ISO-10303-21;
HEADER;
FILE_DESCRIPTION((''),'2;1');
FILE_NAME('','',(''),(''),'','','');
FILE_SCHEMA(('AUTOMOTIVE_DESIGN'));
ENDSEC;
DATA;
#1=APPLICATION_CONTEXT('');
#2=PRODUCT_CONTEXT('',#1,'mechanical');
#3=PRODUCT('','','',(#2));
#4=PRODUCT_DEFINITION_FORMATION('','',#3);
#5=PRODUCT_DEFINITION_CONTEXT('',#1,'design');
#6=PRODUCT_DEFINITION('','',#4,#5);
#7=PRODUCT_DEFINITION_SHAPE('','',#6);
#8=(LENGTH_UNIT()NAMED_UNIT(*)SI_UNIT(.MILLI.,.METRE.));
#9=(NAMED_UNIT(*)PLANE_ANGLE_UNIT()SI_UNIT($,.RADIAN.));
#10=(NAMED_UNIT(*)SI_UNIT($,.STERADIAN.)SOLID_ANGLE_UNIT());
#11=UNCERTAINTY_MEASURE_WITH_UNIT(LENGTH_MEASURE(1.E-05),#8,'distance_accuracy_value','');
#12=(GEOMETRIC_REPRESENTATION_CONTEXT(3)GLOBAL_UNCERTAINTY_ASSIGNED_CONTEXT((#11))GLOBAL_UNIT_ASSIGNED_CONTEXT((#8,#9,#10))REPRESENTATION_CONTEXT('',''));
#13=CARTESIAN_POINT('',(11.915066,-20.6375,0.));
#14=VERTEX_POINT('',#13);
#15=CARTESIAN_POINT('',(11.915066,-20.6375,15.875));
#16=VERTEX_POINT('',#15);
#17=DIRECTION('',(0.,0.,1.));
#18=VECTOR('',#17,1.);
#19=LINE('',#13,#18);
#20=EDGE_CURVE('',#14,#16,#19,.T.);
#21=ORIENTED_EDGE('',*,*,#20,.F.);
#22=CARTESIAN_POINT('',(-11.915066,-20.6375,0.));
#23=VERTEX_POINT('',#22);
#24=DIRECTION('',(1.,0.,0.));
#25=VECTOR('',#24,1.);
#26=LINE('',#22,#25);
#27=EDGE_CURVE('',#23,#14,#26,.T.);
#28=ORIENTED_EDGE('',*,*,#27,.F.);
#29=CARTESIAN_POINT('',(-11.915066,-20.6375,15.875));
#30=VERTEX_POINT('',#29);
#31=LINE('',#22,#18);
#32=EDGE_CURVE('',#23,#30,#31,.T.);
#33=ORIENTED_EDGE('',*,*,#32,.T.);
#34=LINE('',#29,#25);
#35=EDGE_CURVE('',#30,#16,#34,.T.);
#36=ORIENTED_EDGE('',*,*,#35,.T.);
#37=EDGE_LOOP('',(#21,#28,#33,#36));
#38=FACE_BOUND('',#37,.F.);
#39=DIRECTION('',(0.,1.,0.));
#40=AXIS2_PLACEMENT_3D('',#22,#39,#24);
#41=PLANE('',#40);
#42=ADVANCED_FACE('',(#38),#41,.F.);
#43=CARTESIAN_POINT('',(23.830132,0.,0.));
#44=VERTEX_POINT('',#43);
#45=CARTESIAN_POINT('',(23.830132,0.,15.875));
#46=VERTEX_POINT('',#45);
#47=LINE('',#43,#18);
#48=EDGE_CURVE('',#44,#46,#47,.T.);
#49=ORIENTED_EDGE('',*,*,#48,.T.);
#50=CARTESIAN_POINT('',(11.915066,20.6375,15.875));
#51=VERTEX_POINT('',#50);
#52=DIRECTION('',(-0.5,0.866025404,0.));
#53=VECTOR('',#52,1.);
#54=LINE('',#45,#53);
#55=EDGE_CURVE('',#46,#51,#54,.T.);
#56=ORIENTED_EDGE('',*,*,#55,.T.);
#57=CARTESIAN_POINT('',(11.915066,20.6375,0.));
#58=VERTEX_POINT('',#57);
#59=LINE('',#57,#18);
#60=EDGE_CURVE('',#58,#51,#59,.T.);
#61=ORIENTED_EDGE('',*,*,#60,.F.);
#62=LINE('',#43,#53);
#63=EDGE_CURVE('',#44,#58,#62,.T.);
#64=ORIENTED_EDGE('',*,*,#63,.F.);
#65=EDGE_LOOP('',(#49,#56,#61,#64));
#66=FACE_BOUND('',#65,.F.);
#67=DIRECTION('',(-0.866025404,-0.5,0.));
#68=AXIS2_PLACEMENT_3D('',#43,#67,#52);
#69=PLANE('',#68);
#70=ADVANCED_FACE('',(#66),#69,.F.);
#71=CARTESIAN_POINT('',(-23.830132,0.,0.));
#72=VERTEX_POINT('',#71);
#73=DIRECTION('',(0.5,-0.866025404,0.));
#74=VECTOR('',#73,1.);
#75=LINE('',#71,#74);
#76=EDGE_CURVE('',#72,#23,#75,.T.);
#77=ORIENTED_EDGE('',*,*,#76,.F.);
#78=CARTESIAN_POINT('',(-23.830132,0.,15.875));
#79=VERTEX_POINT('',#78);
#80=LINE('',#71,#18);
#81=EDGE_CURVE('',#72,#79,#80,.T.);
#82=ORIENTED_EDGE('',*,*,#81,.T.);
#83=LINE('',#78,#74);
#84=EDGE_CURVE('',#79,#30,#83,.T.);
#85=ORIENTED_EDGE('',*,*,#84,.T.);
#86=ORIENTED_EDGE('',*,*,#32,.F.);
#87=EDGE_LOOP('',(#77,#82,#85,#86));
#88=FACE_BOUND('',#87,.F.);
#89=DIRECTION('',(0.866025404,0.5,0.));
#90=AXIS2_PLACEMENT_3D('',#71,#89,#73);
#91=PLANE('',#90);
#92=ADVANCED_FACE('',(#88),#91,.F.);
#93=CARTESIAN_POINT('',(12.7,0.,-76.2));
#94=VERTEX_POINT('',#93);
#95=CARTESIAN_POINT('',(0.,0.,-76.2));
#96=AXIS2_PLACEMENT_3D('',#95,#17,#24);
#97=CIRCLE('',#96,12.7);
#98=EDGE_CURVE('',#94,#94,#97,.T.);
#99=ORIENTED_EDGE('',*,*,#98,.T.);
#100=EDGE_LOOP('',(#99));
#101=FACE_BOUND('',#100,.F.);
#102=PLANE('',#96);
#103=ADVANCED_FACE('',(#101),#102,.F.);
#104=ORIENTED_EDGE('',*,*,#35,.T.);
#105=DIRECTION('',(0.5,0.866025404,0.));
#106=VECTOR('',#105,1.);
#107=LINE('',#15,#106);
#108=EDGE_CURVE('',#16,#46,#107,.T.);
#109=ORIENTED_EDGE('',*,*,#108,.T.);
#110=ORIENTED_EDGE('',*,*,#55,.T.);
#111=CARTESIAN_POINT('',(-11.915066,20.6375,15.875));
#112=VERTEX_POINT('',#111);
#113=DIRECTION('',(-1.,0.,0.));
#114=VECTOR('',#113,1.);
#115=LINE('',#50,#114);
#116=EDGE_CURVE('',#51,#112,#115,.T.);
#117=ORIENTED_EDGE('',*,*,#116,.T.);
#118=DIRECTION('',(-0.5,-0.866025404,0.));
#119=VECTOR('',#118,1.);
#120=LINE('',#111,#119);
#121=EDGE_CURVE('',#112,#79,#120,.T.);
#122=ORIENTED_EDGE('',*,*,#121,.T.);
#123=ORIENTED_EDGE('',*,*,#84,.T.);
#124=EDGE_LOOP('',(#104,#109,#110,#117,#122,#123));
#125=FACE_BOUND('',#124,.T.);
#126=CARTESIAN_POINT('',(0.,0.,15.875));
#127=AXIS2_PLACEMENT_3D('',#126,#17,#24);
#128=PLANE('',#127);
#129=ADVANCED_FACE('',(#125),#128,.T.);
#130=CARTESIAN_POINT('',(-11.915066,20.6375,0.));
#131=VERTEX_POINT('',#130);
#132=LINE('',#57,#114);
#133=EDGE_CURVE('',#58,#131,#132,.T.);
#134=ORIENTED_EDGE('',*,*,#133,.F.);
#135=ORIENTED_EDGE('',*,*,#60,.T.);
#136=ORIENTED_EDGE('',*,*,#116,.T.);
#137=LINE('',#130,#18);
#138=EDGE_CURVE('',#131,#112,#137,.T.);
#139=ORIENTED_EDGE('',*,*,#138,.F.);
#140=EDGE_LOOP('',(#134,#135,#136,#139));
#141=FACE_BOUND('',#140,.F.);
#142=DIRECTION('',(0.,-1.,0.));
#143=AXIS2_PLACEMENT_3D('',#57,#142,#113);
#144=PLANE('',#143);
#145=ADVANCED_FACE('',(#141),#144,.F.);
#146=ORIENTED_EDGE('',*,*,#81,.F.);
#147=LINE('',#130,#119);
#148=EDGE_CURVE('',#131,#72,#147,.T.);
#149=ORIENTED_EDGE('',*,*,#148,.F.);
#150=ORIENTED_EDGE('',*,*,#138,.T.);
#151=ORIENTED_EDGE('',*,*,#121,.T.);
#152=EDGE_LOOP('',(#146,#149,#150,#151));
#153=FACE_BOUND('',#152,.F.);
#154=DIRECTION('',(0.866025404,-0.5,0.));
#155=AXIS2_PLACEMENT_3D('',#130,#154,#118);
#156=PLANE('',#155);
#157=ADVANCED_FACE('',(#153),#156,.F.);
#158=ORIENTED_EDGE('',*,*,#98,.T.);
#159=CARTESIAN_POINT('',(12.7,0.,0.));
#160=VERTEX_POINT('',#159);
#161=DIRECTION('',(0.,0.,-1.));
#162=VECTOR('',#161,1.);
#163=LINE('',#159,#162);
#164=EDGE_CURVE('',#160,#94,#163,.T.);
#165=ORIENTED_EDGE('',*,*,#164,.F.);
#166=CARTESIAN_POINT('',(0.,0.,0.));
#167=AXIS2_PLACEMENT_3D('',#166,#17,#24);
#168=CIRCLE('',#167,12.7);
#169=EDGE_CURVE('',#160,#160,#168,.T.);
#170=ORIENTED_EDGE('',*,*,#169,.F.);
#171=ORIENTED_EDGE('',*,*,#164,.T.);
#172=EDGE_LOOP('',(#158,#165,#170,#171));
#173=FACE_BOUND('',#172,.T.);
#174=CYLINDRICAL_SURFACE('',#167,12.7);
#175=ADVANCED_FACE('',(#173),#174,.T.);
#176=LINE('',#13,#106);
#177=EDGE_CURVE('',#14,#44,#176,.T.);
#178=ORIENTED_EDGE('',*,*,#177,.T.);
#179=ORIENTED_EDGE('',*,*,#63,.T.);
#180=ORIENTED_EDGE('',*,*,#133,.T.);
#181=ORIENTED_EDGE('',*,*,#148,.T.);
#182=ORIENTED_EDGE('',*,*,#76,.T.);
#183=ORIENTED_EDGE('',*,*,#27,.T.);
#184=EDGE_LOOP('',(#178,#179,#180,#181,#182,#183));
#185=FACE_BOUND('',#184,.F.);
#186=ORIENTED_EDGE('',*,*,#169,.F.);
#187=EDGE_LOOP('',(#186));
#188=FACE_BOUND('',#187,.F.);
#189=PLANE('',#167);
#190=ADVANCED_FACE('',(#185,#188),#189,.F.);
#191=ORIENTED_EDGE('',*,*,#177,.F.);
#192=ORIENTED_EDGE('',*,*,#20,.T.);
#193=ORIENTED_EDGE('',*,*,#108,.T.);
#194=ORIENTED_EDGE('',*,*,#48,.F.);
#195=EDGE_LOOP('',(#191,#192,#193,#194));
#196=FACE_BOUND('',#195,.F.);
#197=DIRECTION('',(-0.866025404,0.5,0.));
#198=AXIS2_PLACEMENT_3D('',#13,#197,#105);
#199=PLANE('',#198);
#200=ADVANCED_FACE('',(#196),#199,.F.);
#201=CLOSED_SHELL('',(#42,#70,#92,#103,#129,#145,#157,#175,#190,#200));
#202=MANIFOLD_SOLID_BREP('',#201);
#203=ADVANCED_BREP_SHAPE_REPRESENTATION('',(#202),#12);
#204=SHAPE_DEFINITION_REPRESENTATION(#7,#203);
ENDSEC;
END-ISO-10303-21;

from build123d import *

# Parameters (mm, degrees)
F0_R     = 12.7
F1_DEPTH = 76.2
F3_DEPTH = 15.875


# Not quite as in the source:
# - a feature names something its author has since deleted; it is built from what else it names


with BuildPart() as f1:
    # F0 (on Top) → F1 (new body)
    with BuildSketch(Plane.XY):
        Circle(F0_R)
    extrude(amount=-F1_DEPTH)

    # F2 (on face) → F3 (join)
    with BuildSketch(Plane.XY):
        Polygon((11.9150661804, 20.6375), (-11.9150661804, 20.6375), (-23.8301323608, 0), (-11.9150661804, -20.6375), (11.9150661804, -20.6375), (23.8301323608, 0), align=None)
    extrude(amount=F3_DEPTH)


solid = f1.part
